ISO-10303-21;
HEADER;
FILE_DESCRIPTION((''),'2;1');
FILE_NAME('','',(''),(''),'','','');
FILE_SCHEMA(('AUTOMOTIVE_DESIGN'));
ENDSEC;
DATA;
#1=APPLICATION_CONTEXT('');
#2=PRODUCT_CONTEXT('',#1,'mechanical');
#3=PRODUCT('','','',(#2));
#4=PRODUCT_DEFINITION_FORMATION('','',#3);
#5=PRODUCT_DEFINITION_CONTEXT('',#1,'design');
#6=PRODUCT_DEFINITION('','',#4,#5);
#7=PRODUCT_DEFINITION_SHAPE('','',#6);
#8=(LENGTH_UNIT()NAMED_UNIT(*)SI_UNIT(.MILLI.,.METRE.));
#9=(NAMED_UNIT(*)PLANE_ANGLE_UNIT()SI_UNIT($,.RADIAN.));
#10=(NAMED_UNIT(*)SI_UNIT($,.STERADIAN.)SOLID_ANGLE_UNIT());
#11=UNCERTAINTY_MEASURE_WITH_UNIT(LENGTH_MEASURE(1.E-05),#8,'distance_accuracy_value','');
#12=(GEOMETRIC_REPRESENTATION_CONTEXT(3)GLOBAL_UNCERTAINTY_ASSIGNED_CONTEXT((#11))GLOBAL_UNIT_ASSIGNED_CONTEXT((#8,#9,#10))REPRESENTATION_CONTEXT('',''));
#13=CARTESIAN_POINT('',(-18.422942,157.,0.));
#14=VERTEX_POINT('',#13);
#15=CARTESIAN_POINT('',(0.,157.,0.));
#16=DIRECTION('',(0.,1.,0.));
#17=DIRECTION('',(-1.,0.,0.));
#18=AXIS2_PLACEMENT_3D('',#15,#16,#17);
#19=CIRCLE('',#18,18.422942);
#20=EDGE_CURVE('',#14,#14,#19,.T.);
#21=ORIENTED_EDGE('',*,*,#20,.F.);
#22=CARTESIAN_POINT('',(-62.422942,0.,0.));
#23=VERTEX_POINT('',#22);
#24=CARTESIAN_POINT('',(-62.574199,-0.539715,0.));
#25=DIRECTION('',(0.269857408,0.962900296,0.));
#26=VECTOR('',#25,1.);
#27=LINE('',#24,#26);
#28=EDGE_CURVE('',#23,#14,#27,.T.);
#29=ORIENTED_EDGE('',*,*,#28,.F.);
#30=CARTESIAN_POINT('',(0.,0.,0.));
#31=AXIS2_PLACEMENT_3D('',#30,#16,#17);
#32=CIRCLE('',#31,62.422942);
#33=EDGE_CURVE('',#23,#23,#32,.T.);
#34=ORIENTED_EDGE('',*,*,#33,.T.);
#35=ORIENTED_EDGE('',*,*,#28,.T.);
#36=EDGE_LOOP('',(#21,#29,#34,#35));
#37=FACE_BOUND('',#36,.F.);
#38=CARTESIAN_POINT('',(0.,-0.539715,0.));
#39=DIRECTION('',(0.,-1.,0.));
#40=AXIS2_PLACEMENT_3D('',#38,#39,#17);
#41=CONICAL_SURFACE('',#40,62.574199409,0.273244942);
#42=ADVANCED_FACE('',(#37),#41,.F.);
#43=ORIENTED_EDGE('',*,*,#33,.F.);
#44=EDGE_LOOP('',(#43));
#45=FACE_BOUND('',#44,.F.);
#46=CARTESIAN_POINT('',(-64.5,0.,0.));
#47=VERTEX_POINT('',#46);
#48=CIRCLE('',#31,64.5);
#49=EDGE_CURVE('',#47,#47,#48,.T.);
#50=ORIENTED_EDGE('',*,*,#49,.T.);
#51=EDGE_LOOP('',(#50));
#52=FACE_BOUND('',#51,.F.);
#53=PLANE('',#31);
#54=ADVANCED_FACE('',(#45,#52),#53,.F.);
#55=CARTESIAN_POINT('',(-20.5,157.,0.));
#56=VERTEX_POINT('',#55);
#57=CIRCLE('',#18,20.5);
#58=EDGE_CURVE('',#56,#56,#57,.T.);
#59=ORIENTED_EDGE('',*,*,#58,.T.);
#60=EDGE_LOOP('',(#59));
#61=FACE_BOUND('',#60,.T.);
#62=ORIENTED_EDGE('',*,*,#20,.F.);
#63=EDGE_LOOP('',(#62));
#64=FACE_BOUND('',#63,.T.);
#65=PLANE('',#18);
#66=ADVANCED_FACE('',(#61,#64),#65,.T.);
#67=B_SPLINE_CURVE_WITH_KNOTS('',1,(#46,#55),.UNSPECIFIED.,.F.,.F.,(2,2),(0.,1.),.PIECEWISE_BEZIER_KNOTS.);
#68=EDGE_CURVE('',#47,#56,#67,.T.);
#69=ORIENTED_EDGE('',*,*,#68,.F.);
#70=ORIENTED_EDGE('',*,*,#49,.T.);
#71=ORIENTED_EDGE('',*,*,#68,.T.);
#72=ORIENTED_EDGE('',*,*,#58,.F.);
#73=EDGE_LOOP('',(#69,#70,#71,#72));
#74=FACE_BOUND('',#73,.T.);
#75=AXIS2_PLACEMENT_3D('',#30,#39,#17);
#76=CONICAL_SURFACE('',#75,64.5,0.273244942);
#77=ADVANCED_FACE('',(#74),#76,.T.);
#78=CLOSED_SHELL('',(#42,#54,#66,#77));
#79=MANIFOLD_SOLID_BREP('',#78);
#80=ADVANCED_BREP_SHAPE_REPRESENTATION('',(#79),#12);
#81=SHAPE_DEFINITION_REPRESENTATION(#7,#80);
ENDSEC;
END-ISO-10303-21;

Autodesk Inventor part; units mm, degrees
ref_plane "YZ Plane" through (0, 0, 0) normal (1, 0, 0) x (0, 1, 0)
ref_plane "XY Plane" through (0, 0, 0) normal (0, 0, 1) x (1, 0, 0)
sketch "Szkic6" plane through (0, 0, 0) normal (0, 1, 0) x (-1, 0, 0)
  circle A0 centre (0, 0) radius 64.5
  dimension "d33" = 129
ref_plane "Płaszczyzna konstrukcyjna1" through (0, 157, 0) normal (0, 1, 0) x (-1, 0, 0)
sketch "Szkic7" plane through (0, 157, 0) normal (0, 1, 0) x (-1, 0, 0)
  circle A0 centre (0, 0) radius 20.5
  dimension "d35" = 41
loft "Wyciągnięcie złożone1" add profiles "Szkic6", "Szkic7"
shell "Skorupa1" thickness 2 removed faces 2 at (-3.5154, 157, 4.1371) at (-10.0865, 0, -16.1433)
equation "\"d33\" = OD1"
equation "\"d35\" = OD2"
equation "\"d52\" = THK"
equation "\"SzerokośćGięciaPodcięcia\" = Grubość"
equation "\"RozmiarPodcięciaNarożnika\" = 4 * Grubość"
equation "\"PromieńPrzejścia\" = PromieńGięcia"
equation "\"Rozmiar_promienia_Jacobiego\" = PromieńGięcia"
equation "\"Wielk_odstępu\" = Grubość"
equation "\"d2\" = PromieńGięcia"
equation "\"d23\" = PromieńGięcia"
equation "\"OD1\" = 129"
equation "\"OD2\" = 41"
equation "\"L\" = 157"
equation "\"THK\" = 2"
equation "\"d34\" = L"
equation "\"Grubość\" = 1.5"
equation "\"PromieńGięcia\" = 3"
properties part number "Redukcja symetryczna Ø129x41x2 L=157" material "304"
